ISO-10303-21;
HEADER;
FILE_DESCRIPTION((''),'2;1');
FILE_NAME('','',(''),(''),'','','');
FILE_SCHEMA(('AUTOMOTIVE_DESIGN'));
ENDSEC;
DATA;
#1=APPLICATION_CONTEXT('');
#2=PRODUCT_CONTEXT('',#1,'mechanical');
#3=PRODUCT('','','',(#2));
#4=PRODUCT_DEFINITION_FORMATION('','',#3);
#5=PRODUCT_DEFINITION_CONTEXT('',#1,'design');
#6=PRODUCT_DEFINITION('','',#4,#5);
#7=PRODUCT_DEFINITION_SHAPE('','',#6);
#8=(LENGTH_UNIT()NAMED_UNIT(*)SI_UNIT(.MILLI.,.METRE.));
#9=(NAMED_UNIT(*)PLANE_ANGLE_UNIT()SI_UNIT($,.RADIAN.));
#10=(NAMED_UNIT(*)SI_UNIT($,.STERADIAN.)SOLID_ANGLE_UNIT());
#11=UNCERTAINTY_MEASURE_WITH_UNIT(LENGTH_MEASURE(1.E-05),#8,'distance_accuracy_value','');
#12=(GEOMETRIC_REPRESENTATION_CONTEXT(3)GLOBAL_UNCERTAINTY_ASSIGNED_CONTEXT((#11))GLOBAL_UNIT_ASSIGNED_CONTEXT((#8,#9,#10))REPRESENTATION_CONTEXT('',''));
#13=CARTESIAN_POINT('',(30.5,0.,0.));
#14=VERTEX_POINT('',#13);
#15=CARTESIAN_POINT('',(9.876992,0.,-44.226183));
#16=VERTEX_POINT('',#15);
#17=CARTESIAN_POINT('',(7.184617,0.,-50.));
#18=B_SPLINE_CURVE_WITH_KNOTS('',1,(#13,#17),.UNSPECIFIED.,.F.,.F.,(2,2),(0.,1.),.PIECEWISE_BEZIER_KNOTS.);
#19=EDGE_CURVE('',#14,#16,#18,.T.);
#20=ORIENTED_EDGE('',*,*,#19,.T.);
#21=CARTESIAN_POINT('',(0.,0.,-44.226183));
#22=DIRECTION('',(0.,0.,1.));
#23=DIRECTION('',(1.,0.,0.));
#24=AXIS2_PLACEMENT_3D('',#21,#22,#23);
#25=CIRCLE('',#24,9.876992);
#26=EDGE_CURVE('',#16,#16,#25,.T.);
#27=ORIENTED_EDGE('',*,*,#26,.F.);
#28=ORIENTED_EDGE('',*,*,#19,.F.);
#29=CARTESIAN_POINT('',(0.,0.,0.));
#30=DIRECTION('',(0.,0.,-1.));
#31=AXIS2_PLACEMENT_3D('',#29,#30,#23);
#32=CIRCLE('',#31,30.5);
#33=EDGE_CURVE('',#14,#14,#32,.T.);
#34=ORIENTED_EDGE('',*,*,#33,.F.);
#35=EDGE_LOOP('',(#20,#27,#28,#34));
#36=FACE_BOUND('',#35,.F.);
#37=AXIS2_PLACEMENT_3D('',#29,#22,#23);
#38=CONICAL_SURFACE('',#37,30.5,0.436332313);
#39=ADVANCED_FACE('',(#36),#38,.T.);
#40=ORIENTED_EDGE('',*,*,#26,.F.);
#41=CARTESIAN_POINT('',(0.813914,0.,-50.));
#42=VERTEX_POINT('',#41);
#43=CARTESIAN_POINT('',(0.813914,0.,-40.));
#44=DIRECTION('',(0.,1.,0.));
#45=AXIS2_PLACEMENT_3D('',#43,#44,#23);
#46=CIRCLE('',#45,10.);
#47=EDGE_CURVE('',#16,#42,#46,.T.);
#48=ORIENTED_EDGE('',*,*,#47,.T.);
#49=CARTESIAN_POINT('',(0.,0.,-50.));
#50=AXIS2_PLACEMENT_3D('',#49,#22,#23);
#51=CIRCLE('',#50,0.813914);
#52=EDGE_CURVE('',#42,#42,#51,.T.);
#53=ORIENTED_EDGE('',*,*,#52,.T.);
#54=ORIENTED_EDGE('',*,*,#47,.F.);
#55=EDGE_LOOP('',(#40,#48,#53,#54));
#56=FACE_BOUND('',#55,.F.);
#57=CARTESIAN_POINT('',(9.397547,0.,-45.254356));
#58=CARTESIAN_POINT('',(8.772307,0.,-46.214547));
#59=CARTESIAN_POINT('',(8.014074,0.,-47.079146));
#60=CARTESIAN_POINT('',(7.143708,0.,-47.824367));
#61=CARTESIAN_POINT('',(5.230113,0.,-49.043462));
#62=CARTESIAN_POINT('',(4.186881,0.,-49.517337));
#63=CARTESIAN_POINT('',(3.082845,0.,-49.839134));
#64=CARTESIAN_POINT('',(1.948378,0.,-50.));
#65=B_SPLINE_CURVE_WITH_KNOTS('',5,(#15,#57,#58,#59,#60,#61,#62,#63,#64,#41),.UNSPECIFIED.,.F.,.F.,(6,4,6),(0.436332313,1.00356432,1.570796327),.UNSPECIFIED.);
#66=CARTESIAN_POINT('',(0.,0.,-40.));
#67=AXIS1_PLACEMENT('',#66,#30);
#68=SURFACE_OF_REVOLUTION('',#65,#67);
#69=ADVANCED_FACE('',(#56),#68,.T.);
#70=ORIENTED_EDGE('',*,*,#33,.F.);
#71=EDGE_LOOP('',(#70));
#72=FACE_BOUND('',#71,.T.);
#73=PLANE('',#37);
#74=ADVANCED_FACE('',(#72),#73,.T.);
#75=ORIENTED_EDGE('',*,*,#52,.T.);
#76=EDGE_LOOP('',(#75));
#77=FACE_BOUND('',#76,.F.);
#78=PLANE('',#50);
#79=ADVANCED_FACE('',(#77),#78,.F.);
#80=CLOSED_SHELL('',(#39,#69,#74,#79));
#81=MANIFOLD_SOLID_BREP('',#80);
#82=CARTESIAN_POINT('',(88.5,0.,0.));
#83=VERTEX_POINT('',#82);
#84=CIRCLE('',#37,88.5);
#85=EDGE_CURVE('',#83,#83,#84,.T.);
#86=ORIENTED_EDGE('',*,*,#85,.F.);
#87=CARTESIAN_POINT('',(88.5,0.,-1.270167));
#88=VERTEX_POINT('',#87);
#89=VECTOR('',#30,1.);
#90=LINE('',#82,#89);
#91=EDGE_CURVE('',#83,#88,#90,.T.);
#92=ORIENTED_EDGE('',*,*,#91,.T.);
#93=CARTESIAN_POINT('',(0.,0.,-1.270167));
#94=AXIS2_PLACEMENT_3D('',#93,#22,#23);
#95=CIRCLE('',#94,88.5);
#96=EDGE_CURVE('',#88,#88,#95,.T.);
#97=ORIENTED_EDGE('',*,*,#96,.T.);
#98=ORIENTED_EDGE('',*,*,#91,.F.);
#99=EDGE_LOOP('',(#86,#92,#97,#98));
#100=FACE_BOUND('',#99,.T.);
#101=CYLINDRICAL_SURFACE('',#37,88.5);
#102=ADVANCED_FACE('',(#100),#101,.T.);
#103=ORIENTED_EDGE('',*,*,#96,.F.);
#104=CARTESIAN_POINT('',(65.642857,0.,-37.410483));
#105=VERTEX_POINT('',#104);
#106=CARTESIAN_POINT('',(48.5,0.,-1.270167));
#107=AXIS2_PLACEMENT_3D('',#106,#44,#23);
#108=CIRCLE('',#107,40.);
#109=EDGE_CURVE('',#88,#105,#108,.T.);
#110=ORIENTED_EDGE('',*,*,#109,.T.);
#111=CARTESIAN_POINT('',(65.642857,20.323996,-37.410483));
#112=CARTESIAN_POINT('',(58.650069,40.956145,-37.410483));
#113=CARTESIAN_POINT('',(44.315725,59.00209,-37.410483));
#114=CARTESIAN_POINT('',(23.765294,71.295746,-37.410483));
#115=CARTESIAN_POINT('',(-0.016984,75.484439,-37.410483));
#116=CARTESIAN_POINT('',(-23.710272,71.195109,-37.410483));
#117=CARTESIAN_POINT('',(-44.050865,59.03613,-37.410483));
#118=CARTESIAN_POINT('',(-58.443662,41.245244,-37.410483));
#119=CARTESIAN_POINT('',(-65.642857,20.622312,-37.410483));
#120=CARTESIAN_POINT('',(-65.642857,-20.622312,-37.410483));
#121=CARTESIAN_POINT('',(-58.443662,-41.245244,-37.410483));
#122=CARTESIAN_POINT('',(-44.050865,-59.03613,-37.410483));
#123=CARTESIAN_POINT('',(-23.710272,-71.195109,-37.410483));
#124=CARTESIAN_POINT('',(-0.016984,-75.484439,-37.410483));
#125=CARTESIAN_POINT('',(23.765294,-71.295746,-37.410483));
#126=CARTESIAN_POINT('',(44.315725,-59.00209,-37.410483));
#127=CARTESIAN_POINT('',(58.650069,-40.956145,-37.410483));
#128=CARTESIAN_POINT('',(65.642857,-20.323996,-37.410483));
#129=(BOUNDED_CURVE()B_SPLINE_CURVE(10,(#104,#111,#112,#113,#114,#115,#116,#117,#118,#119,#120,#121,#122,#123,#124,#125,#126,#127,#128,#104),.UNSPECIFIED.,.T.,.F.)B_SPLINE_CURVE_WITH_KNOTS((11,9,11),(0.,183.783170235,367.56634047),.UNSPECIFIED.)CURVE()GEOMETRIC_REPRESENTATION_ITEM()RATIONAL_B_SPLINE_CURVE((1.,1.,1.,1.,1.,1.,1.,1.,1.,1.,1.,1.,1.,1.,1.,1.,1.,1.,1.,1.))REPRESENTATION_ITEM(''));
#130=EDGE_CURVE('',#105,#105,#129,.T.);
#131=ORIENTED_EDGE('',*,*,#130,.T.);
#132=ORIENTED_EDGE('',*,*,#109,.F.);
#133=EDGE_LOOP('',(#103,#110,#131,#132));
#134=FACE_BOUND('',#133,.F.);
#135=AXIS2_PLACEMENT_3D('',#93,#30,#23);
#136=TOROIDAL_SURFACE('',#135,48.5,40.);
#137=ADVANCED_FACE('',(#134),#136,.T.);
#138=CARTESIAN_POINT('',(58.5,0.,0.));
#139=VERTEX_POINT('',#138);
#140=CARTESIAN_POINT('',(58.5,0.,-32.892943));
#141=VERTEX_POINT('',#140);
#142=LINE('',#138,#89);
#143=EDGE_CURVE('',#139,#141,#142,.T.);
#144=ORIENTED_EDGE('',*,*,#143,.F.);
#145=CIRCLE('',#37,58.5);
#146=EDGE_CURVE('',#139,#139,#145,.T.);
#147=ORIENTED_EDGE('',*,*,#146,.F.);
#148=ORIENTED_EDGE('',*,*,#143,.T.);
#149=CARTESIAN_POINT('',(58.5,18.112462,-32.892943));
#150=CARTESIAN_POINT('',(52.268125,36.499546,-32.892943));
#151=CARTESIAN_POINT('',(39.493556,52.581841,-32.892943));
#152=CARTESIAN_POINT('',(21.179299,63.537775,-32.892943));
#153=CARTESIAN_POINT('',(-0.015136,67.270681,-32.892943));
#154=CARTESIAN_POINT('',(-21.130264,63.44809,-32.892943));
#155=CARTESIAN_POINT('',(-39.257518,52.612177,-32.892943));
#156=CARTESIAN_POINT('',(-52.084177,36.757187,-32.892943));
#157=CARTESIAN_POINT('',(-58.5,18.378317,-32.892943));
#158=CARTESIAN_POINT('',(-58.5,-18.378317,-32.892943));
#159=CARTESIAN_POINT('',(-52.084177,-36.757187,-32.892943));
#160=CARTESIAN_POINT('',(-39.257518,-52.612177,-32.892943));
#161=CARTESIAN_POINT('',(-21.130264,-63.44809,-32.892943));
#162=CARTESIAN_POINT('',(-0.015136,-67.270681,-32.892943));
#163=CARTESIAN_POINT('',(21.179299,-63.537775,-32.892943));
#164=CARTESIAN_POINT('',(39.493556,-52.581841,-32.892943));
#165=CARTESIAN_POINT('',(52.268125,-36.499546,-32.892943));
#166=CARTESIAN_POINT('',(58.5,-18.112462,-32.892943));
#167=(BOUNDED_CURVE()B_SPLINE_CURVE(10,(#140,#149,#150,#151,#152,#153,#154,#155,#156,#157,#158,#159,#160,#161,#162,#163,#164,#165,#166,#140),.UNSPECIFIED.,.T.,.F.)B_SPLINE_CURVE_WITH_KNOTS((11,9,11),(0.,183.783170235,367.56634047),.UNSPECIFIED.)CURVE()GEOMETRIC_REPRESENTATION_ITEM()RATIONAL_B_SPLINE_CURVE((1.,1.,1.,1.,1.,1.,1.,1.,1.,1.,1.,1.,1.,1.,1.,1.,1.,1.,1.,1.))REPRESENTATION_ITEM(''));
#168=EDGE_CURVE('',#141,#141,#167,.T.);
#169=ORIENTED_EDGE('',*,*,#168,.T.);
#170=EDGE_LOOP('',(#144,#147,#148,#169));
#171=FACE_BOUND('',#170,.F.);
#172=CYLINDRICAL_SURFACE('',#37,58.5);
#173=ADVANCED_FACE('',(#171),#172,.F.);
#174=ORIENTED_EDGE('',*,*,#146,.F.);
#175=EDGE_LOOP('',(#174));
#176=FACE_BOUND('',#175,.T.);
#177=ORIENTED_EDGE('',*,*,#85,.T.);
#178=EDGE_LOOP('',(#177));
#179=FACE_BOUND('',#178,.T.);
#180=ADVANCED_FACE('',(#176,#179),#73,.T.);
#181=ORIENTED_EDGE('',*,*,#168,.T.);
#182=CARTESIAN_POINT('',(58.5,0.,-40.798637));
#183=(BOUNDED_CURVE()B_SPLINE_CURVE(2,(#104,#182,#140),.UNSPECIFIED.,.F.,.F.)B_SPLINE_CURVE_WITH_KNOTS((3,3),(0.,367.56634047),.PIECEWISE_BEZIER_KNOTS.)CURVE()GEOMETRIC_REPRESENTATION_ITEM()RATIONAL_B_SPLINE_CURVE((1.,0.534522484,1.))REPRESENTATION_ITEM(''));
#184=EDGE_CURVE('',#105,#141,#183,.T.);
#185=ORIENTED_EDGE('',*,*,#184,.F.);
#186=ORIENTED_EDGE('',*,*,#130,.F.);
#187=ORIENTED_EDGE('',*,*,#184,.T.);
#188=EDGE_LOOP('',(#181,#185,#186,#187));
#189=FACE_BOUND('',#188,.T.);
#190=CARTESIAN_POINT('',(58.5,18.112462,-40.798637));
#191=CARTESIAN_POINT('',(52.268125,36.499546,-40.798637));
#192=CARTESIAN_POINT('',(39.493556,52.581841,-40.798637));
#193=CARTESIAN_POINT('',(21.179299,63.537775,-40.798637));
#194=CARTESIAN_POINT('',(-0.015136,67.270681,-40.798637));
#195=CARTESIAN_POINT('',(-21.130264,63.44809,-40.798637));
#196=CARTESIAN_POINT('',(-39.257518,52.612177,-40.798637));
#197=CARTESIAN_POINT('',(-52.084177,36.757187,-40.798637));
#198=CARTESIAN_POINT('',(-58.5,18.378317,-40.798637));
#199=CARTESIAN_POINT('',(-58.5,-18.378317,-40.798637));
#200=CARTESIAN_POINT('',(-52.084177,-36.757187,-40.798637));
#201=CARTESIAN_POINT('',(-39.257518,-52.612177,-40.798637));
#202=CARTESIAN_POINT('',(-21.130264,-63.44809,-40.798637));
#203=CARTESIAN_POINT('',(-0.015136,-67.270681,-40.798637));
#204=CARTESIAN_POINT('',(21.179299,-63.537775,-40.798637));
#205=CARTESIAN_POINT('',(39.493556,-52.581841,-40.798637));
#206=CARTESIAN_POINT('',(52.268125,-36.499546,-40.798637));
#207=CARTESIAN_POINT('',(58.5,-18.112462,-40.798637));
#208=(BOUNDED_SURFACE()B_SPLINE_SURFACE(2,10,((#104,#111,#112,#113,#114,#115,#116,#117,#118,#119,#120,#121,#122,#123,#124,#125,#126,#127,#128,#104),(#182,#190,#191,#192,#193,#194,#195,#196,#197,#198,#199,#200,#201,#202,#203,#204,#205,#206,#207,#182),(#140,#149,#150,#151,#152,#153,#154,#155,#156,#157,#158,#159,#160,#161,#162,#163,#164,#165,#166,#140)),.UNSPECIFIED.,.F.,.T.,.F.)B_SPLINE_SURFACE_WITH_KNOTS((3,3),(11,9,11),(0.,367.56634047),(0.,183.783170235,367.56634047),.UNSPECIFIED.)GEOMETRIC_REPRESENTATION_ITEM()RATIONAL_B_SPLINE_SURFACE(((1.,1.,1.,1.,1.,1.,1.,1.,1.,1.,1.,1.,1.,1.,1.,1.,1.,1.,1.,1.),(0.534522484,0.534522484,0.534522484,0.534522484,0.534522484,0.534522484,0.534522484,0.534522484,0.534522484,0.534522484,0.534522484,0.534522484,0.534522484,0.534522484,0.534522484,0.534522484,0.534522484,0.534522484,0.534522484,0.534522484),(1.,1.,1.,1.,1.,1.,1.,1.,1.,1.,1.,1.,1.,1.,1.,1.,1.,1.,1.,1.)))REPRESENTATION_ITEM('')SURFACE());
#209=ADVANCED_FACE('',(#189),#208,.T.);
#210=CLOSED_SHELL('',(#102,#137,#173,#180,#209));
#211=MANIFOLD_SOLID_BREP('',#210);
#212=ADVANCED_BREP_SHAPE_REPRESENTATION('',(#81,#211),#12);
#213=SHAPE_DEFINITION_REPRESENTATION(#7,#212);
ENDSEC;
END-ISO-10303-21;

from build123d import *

# Parameters (mm, degrees)
F0_R     = 30.5
F1_DEPTH = 50
F1_TAPER = 25
F2_R     = 10
F0_R_2   = 88.5
F0_R_3   = 58.5
F3_DEPTH = 40
F5_R     = 5


# Not quite as in the source:
# - a fillet or chamfer that OpenCascade refuses, or shapes differently, is made with other operations: its cross-section is extruded or revolved along the edge and cut away or added


with BuildPart() as f1:
    # F0 (on Top) → F1 (new body)
    with BuildSketch(Plane.XY):
        Circle(F0_R)
    extrude(amount=-F1_DEPTH, taper=F1_TAPER)

    # F2
    f2_edges = [f1.edges().sort_by_distance(p)[0] for p in [
        (-7.184617, 0, -50),
    ]]
    fillet(f2_edges, radius=F2_R)


with BuildPart() as f3:
    # F0 (on Top) → F3 (new body)
    with BuildSketch(Plane.XY):
        Circle(F0_R_2)
        Circle(F0_R_3, mode=Mode.SUBTRACT)
    extrude(amount=-F3_DEPTH)

    # F4: fillet of radius 40 on 1 edges, made by hand

    # F4_s1 → F4_t2 (revolve, cut)
    with BuildSketch(Plane.XZ):
        with BuildLine():
            ThreePointArc((88.5, -1.2701665379), (80.1227766017, -25.7650639658), (58.5, -40))
            Line((58.5, -40), (88.5, -40))
            Line((88.5, -40), (88.5, -1.2701665379))
        make_face()
    revolve(axis=Axis((0, 0, -40), (0, 0, 1)), mode=Mode.SUBTRACT)

    # F5
    f5_edges = [f3.edges().sort_by_distance(p)[0] for p in [
        (-58.5, 0, -40),
    ]]
    fillet(f5_edges, radius=F5_R)


solid = Compound([f1.part, f3.part])
